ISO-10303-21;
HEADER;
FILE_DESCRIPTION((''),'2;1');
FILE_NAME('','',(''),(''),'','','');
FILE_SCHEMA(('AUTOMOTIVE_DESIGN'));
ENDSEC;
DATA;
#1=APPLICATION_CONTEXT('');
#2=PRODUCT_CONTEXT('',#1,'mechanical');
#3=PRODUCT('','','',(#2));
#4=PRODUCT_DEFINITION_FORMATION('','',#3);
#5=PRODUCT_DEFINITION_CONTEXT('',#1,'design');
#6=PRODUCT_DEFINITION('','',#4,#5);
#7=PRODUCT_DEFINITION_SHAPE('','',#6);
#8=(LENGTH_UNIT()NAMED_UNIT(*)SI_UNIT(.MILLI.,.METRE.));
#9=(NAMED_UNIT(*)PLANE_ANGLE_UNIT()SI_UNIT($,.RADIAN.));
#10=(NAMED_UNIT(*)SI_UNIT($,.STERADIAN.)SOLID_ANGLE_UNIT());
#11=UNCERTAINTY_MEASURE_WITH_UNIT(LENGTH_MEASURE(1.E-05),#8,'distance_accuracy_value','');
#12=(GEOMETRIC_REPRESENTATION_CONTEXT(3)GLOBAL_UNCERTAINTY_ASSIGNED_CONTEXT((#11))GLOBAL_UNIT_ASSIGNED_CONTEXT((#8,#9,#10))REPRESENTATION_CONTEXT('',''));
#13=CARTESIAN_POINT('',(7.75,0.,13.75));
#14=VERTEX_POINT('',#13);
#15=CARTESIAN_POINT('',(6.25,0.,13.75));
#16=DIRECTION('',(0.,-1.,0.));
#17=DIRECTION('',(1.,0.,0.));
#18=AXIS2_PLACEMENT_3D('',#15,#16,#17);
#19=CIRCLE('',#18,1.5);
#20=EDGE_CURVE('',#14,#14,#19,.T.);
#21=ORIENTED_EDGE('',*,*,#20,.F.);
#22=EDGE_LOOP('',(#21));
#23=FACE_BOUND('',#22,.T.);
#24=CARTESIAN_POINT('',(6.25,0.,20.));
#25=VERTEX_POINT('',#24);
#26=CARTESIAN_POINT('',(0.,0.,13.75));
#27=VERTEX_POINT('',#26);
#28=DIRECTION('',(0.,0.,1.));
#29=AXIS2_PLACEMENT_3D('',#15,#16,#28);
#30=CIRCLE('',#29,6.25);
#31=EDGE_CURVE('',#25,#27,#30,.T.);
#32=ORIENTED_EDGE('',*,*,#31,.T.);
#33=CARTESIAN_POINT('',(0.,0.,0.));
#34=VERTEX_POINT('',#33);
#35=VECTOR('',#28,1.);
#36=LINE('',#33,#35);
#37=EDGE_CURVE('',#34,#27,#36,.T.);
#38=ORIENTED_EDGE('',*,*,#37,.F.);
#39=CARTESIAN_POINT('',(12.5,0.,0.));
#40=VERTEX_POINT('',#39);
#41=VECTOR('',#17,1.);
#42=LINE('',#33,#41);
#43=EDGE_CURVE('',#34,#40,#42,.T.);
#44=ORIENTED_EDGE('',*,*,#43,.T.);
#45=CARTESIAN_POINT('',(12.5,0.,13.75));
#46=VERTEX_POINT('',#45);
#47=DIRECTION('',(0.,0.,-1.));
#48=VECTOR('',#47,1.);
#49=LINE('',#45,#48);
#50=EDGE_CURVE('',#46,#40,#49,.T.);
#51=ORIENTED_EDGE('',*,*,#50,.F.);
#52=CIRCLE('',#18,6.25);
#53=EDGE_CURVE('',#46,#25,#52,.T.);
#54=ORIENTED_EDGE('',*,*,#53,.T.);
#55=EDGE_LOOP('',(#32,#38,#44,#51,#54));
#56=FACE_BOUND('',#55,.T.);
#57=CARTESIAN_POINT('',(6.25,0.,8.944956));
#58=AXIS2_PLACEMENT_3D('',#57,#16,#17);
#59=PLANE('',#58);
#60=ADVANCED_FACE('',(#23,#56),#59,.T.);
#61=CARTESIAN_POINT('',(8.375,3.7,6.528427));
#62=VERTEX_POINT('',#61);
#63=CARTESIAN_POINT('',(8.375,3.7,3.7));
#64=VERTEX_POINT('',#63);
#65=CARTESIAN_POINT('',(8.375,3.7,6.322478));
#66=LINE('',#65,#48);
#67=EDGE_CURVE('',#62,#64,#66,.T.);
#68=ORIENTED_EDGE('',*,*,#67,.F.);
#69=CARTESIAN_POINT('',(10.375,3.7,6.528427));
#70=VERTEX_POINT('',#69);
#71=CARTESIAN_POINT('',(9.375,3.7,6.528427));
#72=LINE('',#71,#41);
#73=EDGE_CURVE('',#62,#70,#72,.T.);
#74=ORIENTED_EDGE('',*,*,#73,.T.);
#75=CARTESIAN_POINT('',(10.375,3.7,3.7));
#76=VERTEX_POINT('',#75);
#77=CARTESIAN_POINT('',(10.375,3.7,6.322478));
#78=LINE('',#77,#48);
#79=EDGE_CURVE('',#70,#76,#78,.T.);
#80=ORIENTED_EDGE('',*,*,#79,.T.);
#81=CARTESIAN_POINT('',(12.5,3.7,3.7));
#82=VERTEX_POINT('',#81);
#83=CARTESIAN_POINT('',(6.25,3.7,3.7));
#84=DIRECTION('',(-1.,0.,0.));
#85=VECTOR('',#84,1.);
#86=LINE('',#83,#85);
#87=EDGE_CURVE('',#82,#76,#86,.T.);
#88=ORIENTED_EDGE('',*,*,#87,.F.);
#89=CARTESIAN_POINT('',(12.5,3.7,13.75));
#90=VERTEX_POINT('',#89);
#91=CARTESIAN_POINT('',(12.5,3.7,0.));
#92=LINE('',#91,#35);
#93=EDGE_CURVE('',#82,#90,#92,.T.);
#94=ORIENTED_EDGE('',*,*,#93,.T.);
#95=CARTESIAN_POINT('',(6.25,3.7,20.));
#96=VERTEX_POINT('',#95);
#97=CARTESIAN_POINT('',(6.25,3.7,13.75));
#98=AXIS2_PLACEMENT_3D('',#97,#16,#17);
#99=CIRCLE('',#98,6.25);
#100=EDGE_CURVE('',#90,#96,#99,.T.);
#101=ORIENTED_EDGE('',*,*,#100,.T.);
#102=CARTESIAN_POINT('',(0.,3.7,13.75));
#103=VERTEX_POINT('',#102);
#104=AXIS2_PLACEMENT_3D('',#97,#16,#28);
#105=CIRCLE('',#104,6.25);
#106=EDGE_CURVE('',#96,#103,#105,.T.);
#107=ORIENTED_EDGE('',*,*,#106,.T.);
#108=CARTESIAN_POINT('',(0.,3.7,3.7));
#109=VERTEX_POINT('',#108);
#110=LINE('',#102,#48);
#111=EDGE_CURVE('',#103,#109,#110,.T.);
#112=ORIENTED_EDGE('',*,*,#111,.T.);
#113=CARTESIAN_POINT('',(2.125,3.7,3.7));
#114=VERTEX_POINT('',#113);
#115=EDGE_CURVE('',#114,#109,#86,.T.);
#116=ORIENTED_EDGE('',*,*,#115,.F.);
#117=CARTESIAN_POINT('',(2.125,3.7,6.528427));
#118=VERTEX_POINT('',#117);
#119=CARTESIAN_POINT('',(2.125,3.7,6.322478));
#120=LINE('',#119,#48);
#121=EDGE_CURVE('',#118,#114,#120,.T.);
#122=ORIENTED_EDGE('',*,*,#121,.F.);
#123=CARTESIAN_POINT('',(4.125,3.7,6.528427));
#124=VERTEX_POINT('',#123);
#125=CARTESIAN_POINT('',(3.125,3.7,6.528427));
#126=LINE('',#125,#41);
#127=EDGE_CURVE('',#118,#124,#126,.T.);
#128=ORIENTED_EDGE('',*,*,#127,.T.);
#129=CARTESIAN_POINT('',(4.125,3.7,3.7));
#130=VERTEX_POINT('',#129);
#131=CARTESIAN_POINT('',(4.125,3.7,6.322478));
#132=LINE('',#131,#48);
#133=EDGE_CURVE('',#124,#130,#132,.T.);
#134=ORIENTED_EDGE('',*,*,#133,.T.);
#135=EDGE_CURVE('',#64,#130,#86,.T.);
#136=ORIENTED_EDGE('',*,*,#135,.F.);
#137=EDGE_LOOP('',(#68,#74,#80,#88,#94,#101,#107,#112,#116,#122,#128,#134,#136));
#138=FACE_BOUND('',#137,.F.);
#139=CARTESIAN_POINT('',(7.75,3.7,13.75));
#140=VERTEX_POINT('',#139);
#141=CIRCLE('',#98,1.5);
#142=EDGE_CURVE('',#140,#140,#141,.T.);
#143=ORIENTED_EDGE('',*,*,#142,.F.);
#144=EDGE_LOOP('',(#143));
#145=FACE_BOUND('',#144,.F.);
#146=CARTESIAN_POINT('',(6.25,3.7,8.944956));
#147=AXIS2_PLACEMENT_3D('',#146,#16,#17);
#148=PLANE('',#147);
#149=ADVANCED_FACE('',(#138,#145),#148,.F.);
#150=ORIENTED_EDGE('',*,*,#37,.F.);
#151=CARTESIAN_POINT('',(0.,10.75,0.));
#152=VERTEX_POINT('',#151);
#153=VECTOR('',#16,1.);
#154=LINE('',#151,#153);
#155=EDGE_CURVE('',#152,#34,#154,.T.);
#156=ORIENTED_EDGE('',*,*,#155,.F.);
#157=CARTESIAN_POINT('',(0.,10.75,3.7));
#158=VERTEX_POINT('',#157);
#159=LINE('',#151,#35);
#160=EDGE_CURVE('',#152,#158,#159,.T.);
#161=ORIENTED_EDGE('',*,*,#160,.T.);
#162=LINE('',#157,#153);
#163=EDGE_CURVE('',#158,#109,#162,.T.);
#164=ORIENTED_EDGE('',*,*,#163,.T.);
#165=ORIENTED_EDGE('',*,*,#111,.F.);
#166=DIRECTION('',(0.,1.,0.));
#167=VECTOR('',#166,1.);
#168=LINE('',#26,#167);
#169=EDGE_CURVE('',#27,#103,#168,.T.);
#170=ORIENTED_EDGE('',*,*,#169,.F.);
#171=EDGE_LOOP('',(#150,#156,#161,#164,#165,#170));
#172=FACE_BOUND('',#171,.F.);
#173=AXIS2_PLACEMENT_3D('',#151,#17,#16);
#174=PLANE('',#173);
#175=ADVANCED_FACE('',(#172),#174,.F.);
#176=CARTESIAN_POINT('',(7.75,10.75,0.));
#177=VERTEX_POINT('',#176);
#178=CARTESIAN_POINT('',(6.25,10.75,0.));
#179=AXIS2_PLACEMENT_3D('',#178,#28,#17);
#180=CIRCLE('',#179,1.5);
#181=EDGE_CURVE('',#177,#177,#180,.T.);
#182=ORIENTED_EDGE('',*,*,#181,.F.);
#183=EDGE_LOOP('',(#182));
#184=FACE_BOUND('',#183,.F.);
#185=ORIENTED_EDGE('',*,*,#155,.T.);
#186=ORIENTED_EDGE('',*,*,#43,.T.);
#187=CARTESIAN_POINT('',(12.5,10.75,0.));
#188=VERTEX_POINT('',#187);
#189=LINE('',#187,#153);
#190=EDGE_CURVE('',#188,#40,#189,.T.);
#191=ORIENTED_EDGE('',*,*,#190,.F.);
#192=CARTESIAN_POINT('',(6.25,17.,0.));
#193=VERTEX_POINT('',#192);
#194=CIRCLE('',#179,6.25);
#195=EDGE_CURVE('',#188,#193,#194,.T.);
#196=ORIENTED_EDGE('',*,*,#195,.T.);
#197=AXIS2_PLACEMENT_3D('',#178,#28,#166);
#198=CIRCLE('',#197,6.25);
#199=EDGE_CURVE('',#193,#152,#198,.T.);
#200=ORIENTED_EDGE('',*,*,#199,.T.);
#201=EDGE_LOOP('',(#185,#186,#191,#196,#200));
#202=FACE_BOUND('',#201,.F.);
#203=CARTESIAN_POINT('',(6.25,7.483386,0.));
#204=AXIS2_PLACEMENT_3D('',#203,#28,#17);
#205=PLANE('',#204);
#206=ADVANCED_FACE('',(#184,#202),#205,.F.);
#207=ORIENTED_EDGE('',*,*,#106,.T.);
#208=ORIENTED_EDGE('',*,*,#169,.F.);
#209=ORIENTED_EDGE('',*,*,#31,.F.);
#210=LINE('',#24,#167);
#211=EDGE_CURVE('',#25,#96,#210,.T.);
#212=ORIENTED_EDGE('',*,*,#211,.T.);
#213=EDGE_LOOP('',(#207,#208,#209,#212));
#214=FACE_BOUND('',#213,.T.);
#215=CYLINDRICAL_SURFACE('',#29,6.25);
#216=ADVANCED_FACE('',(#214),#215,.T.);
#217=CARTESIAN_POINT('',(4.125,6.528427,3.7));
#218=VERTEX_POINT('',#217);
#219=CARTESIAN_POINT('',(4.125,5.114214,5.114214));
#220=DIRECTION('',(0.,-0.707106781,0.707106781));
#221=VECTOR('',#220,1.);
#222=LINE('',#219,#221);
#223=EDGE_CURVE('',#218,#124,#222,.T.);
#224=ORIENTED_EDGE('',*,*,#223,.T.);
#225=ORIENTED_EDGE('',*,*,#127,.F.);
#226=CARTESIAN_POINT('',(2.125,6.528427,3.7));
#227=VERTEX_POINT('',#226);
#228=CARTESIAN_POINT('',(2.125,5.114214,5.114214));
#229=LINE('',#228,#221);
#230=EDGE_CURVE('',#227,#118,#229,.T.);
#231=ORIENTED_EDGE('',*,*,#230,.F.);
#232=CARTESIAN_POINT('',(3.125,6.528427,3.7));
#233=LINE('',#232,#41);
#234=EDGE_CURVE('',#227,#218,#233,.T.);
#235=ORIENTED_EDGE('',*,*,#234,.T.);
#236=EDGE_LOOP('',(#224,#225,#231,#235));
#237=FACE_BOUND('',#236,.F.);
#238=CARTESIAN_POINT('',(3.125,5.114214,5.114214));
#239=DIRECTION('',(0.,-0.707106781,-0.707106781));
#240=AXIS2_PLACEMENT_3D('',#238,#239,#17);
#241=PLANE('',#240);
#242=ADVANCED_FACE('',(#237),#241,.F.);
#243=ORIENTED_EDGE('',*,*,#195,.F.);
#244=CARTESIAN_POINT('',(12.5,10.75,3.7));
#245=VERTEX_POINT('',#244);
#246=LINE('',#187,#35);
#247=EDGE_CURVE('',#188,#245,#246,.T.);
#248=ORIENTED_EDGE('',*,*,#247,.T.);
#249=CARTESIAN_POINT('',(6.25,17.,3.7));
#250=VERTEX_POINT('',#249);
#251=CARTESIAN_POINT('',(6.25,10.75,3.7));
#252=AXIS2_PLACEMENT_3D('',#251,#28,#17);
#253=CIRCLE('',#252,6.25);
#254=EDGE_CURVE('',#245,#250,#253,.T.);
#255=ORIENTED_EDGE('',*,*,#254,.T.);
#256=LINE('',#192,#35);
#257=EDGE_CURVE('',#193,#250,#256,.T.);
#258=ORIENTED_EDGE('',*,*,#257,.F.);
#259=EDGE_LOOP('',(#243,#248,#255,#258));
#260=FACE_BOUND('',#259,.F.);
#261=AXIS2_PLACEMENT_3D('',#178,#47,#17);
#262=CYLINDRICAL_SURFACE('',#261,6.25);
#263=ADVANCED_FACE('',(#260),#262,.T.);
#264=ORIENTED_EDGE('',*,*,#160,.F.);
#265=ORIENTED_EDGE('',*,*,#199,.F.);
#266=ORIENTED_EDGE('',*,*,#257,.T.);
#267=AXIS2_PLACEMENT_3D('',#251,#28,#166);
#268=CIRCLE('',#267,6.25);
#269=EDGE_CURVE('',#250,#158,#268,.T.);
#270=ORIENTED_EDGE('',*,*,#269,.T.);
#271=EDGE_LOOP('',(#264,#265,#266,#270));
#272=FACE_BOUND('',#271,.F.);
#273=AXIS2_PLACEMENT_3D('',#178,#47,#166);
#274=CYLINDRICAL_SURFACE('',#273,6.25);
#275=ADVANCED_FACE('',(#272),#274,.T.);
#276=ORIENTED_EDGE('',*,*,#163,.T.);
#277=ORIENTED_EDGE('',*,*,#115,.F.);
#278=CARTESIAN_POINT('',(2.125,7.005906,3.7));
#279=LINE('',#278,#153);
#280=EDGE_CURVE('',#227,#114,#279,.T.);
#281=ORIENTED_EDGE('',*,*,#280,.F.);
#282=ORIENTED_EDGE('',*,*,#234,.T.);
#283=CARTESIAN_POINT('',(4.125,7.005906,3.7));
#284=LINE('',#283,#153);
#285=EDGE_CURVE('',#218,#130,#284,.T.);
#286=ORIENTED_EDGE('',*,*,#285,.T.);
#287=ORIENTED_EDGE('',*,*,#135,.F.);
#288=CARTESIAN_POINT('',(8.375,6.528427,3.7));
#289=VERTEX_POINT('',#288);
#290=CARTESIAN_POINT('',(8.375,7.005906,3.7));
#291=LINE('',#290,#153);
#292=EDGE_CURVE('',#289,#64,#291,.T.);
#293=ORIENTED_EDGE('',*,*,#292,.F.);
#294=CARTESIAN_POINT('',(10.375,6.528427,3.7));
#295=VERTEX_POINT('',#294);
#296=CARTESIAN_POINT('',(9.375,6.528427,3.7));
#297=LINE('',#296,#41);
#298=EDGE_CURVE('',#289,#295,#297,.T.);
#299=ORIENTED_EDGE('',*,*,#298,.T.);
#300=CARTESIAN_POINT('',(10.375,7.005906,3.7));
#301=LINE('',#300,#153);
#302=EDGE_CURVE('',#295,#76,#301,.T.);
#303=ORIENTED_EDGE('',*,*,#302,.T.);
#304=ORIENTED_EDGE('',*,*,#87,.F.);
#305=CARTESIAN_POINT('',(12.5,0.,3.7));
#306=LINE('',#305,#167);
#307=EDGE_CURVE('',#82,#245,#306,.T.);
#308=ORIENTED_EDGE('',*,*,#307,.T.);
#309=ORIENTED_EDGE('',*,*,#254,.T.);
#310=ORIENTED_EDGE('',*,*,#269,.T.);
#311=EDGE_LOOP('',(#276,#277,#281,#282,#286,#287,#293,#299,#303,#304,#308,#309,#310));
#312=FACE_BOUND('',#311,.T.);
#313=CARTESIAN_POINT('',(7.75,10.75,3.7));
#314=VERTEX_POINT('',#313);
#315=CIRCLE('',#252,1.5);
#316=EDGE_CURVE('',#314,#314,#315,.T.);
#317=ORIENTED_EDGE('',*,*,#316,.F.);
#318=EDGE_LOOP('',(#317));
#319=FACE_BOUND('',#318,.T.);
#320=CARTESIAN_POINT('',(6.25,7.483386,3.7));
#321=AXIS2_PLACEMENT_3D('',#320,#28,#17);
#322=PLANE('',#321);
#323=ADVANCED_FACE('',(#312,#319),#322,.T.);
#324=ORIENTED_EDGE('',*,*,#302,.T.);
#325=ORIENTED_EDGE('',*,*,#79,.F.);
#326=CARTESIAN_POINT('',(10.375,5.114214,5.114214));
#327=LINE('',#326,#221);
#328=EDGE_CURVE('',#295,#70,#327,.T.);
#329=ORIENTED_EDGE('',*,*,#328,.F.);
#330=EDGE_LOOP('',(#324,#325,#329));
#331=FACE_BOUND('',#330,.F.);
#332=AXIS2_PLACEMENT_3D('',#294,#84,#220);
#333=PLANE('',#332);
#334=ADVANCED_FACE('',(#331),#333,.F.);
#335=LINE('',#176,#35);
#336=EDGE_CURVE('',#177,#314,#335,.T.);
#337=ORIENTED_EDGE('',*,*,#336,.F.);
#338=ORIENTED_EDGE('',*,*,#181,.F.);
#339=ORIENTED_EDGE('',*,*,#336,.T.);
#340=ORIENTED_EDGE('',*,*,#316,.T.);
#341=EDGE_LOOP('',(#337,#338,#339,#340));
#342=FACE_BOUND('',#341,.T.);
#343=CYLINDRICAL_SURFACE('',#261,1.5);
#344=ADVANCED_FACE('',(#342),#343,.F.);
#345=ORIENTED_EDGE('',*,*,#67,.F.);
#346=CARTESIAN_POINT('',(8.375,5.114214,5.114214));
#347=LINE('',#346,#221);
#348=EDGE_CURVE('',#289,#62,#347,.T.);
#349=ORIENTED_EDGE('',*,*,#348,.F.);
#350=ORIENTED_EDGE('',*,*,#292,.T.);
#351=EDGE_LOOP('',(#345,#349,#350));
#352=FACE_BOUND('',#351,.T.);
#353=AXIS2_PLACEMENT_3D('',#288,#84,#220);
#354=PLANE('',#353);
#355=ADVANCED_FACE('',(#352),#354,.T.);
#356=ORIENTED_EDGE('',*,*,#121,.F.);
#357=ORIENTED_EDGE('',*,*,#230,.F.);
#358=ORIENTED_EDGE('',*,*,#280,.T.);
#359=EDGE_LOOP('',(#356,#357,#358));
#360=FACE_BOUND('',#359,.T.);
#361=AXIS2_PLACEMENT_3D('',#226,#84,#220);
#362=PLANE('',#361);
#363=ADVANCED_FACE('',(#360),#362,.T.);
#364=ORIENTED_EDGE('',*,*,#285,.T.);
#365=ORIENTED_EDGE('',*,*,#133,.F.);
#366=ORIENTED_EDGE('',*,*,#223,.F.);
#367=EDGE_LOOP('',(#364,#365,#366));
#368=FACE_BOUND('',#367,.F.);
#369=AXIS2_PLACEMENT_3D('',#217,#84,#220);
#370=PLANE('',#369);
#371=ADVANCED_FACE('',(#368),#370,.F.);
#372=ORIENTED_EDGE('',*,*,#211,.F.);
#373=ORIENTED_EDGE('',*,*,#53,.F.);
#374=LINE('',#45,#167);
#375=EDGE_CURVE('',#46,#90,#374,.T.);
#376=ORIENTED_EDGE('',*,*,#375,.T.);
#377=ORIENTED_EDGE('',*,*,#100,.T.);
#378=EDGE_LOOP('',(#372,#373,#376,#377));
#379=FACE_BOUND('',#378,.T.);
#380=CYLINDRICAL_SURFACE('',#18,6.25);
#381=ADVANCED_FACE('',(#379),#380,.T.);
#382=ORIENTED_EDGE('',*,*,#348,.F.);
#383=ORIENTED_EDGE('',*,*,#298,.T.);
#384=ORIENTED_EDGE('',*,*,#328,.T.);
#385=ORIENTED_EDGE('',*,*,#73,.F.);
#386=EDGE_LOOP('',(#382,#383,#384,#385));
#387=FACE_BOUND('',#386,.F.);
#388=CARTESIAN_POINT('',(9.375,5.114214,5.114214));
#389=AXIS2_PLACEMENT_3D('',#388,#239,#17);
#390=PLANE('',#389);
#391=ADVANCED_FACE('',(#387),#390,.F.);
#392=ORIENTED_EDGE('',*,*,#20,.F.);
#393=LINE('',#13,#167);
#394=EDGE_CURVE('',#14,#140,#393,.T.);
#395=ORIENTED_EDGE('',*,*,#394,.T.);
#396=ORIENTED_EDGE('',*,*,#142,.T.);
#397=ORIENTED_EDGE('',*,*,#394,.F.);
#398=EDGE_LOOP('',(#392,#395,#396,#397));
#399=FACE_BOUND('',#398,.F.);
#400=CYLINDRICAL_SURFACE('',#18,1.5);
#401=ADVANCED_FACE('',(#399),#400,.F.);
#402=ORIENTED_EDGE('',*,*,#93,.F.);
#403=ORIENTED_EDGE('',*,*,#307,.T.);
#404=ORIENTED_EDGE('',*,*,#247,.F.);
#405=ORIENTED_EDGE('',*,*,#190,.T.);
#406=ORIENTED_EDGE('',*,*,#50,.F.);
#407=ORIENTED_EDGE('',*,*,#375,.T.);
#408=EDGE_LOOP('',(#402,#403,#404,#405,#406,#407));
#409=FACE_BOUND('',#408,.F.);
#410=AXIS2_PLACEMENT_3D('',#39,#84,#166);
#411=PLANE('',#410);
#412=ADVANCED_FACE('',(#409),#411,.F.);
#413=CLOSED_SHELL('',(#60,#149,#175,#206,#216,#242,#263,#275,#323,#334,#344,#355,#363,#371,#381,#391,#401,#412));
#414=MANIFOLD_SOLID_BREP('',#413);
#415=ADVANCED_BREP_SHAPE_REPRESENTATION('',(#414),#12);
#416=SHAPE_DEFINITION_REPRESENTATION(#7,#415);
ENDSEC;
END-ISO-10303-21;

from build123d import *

# Parameters (mm, degrees)
F0_R     = 1.5
F2_DEPTH = 3.7
F1_R     = 1.5
F3_DEPTH = 3.7
F6_W     = 2
F6_H     = 4
F7_DEPTH = 4


with BuildPart() as f2:
    # F0 (on Front) → F2 (new body)
    with BuildSketch(Plane.XZ):
        with BuildLine():
            Line((0, 13.75), (0, 0))
            Line((0, 0), (12.5, 0))
            Line((12.5, 0), (12.5, 13.75))
            ThreePointArc((12.5, 13.75), (10.6694173824, 18.1694173824), (6.25, 20))
            ThreePointArc((6.25, 20), (1.8305826176, 18.1694173824), (0, 13.75))
        make_face()
        with Locations((6.25, 13.75)):
            Circle(F0_R, mode=Mode.SUBTRACT)
    extrude(amount=-F2_DEPTH)

    # F1 (on Top) → F3 (join)
    with BuildSketch(Plane.XY):
        with BuildLine():
            Line((0, 10.75), (0, 0))
            Line((0, 0), (12.5, 0))
            Line((12.5, 0), (12.5, 10.75))
            ThreePointArc((12.5, 10.75), (10.6694173824, 15.1694173824), (6.25, 17))
            ThreePointArc((6.25, 17), (1.8305826176, 15.1694173824), (0, 10.75))
        make_face()
        with Locations((6.25, 10.75)):
            Circle(F1_R, mode=Mode.SUBTRACT)
    extrude(amount=F3_DEPTH)

    # F6 (on face) → F7 (join)
    with BuildSketch(Plane(origin=(0, 5.1142135624, 5.1142135624), x_dir=(1, 0, 0), z_dir=(0, -0.7071067812, -0.7071067812))):
        with Locations((9.375, 0)):
            Rectangle(F6_W, F6_H)
        with Locations((3.125, 0)):
            Rectangle(F6_W, F6_H)
    extrude(amount=F7_DEPTH)


solid = f2.part
